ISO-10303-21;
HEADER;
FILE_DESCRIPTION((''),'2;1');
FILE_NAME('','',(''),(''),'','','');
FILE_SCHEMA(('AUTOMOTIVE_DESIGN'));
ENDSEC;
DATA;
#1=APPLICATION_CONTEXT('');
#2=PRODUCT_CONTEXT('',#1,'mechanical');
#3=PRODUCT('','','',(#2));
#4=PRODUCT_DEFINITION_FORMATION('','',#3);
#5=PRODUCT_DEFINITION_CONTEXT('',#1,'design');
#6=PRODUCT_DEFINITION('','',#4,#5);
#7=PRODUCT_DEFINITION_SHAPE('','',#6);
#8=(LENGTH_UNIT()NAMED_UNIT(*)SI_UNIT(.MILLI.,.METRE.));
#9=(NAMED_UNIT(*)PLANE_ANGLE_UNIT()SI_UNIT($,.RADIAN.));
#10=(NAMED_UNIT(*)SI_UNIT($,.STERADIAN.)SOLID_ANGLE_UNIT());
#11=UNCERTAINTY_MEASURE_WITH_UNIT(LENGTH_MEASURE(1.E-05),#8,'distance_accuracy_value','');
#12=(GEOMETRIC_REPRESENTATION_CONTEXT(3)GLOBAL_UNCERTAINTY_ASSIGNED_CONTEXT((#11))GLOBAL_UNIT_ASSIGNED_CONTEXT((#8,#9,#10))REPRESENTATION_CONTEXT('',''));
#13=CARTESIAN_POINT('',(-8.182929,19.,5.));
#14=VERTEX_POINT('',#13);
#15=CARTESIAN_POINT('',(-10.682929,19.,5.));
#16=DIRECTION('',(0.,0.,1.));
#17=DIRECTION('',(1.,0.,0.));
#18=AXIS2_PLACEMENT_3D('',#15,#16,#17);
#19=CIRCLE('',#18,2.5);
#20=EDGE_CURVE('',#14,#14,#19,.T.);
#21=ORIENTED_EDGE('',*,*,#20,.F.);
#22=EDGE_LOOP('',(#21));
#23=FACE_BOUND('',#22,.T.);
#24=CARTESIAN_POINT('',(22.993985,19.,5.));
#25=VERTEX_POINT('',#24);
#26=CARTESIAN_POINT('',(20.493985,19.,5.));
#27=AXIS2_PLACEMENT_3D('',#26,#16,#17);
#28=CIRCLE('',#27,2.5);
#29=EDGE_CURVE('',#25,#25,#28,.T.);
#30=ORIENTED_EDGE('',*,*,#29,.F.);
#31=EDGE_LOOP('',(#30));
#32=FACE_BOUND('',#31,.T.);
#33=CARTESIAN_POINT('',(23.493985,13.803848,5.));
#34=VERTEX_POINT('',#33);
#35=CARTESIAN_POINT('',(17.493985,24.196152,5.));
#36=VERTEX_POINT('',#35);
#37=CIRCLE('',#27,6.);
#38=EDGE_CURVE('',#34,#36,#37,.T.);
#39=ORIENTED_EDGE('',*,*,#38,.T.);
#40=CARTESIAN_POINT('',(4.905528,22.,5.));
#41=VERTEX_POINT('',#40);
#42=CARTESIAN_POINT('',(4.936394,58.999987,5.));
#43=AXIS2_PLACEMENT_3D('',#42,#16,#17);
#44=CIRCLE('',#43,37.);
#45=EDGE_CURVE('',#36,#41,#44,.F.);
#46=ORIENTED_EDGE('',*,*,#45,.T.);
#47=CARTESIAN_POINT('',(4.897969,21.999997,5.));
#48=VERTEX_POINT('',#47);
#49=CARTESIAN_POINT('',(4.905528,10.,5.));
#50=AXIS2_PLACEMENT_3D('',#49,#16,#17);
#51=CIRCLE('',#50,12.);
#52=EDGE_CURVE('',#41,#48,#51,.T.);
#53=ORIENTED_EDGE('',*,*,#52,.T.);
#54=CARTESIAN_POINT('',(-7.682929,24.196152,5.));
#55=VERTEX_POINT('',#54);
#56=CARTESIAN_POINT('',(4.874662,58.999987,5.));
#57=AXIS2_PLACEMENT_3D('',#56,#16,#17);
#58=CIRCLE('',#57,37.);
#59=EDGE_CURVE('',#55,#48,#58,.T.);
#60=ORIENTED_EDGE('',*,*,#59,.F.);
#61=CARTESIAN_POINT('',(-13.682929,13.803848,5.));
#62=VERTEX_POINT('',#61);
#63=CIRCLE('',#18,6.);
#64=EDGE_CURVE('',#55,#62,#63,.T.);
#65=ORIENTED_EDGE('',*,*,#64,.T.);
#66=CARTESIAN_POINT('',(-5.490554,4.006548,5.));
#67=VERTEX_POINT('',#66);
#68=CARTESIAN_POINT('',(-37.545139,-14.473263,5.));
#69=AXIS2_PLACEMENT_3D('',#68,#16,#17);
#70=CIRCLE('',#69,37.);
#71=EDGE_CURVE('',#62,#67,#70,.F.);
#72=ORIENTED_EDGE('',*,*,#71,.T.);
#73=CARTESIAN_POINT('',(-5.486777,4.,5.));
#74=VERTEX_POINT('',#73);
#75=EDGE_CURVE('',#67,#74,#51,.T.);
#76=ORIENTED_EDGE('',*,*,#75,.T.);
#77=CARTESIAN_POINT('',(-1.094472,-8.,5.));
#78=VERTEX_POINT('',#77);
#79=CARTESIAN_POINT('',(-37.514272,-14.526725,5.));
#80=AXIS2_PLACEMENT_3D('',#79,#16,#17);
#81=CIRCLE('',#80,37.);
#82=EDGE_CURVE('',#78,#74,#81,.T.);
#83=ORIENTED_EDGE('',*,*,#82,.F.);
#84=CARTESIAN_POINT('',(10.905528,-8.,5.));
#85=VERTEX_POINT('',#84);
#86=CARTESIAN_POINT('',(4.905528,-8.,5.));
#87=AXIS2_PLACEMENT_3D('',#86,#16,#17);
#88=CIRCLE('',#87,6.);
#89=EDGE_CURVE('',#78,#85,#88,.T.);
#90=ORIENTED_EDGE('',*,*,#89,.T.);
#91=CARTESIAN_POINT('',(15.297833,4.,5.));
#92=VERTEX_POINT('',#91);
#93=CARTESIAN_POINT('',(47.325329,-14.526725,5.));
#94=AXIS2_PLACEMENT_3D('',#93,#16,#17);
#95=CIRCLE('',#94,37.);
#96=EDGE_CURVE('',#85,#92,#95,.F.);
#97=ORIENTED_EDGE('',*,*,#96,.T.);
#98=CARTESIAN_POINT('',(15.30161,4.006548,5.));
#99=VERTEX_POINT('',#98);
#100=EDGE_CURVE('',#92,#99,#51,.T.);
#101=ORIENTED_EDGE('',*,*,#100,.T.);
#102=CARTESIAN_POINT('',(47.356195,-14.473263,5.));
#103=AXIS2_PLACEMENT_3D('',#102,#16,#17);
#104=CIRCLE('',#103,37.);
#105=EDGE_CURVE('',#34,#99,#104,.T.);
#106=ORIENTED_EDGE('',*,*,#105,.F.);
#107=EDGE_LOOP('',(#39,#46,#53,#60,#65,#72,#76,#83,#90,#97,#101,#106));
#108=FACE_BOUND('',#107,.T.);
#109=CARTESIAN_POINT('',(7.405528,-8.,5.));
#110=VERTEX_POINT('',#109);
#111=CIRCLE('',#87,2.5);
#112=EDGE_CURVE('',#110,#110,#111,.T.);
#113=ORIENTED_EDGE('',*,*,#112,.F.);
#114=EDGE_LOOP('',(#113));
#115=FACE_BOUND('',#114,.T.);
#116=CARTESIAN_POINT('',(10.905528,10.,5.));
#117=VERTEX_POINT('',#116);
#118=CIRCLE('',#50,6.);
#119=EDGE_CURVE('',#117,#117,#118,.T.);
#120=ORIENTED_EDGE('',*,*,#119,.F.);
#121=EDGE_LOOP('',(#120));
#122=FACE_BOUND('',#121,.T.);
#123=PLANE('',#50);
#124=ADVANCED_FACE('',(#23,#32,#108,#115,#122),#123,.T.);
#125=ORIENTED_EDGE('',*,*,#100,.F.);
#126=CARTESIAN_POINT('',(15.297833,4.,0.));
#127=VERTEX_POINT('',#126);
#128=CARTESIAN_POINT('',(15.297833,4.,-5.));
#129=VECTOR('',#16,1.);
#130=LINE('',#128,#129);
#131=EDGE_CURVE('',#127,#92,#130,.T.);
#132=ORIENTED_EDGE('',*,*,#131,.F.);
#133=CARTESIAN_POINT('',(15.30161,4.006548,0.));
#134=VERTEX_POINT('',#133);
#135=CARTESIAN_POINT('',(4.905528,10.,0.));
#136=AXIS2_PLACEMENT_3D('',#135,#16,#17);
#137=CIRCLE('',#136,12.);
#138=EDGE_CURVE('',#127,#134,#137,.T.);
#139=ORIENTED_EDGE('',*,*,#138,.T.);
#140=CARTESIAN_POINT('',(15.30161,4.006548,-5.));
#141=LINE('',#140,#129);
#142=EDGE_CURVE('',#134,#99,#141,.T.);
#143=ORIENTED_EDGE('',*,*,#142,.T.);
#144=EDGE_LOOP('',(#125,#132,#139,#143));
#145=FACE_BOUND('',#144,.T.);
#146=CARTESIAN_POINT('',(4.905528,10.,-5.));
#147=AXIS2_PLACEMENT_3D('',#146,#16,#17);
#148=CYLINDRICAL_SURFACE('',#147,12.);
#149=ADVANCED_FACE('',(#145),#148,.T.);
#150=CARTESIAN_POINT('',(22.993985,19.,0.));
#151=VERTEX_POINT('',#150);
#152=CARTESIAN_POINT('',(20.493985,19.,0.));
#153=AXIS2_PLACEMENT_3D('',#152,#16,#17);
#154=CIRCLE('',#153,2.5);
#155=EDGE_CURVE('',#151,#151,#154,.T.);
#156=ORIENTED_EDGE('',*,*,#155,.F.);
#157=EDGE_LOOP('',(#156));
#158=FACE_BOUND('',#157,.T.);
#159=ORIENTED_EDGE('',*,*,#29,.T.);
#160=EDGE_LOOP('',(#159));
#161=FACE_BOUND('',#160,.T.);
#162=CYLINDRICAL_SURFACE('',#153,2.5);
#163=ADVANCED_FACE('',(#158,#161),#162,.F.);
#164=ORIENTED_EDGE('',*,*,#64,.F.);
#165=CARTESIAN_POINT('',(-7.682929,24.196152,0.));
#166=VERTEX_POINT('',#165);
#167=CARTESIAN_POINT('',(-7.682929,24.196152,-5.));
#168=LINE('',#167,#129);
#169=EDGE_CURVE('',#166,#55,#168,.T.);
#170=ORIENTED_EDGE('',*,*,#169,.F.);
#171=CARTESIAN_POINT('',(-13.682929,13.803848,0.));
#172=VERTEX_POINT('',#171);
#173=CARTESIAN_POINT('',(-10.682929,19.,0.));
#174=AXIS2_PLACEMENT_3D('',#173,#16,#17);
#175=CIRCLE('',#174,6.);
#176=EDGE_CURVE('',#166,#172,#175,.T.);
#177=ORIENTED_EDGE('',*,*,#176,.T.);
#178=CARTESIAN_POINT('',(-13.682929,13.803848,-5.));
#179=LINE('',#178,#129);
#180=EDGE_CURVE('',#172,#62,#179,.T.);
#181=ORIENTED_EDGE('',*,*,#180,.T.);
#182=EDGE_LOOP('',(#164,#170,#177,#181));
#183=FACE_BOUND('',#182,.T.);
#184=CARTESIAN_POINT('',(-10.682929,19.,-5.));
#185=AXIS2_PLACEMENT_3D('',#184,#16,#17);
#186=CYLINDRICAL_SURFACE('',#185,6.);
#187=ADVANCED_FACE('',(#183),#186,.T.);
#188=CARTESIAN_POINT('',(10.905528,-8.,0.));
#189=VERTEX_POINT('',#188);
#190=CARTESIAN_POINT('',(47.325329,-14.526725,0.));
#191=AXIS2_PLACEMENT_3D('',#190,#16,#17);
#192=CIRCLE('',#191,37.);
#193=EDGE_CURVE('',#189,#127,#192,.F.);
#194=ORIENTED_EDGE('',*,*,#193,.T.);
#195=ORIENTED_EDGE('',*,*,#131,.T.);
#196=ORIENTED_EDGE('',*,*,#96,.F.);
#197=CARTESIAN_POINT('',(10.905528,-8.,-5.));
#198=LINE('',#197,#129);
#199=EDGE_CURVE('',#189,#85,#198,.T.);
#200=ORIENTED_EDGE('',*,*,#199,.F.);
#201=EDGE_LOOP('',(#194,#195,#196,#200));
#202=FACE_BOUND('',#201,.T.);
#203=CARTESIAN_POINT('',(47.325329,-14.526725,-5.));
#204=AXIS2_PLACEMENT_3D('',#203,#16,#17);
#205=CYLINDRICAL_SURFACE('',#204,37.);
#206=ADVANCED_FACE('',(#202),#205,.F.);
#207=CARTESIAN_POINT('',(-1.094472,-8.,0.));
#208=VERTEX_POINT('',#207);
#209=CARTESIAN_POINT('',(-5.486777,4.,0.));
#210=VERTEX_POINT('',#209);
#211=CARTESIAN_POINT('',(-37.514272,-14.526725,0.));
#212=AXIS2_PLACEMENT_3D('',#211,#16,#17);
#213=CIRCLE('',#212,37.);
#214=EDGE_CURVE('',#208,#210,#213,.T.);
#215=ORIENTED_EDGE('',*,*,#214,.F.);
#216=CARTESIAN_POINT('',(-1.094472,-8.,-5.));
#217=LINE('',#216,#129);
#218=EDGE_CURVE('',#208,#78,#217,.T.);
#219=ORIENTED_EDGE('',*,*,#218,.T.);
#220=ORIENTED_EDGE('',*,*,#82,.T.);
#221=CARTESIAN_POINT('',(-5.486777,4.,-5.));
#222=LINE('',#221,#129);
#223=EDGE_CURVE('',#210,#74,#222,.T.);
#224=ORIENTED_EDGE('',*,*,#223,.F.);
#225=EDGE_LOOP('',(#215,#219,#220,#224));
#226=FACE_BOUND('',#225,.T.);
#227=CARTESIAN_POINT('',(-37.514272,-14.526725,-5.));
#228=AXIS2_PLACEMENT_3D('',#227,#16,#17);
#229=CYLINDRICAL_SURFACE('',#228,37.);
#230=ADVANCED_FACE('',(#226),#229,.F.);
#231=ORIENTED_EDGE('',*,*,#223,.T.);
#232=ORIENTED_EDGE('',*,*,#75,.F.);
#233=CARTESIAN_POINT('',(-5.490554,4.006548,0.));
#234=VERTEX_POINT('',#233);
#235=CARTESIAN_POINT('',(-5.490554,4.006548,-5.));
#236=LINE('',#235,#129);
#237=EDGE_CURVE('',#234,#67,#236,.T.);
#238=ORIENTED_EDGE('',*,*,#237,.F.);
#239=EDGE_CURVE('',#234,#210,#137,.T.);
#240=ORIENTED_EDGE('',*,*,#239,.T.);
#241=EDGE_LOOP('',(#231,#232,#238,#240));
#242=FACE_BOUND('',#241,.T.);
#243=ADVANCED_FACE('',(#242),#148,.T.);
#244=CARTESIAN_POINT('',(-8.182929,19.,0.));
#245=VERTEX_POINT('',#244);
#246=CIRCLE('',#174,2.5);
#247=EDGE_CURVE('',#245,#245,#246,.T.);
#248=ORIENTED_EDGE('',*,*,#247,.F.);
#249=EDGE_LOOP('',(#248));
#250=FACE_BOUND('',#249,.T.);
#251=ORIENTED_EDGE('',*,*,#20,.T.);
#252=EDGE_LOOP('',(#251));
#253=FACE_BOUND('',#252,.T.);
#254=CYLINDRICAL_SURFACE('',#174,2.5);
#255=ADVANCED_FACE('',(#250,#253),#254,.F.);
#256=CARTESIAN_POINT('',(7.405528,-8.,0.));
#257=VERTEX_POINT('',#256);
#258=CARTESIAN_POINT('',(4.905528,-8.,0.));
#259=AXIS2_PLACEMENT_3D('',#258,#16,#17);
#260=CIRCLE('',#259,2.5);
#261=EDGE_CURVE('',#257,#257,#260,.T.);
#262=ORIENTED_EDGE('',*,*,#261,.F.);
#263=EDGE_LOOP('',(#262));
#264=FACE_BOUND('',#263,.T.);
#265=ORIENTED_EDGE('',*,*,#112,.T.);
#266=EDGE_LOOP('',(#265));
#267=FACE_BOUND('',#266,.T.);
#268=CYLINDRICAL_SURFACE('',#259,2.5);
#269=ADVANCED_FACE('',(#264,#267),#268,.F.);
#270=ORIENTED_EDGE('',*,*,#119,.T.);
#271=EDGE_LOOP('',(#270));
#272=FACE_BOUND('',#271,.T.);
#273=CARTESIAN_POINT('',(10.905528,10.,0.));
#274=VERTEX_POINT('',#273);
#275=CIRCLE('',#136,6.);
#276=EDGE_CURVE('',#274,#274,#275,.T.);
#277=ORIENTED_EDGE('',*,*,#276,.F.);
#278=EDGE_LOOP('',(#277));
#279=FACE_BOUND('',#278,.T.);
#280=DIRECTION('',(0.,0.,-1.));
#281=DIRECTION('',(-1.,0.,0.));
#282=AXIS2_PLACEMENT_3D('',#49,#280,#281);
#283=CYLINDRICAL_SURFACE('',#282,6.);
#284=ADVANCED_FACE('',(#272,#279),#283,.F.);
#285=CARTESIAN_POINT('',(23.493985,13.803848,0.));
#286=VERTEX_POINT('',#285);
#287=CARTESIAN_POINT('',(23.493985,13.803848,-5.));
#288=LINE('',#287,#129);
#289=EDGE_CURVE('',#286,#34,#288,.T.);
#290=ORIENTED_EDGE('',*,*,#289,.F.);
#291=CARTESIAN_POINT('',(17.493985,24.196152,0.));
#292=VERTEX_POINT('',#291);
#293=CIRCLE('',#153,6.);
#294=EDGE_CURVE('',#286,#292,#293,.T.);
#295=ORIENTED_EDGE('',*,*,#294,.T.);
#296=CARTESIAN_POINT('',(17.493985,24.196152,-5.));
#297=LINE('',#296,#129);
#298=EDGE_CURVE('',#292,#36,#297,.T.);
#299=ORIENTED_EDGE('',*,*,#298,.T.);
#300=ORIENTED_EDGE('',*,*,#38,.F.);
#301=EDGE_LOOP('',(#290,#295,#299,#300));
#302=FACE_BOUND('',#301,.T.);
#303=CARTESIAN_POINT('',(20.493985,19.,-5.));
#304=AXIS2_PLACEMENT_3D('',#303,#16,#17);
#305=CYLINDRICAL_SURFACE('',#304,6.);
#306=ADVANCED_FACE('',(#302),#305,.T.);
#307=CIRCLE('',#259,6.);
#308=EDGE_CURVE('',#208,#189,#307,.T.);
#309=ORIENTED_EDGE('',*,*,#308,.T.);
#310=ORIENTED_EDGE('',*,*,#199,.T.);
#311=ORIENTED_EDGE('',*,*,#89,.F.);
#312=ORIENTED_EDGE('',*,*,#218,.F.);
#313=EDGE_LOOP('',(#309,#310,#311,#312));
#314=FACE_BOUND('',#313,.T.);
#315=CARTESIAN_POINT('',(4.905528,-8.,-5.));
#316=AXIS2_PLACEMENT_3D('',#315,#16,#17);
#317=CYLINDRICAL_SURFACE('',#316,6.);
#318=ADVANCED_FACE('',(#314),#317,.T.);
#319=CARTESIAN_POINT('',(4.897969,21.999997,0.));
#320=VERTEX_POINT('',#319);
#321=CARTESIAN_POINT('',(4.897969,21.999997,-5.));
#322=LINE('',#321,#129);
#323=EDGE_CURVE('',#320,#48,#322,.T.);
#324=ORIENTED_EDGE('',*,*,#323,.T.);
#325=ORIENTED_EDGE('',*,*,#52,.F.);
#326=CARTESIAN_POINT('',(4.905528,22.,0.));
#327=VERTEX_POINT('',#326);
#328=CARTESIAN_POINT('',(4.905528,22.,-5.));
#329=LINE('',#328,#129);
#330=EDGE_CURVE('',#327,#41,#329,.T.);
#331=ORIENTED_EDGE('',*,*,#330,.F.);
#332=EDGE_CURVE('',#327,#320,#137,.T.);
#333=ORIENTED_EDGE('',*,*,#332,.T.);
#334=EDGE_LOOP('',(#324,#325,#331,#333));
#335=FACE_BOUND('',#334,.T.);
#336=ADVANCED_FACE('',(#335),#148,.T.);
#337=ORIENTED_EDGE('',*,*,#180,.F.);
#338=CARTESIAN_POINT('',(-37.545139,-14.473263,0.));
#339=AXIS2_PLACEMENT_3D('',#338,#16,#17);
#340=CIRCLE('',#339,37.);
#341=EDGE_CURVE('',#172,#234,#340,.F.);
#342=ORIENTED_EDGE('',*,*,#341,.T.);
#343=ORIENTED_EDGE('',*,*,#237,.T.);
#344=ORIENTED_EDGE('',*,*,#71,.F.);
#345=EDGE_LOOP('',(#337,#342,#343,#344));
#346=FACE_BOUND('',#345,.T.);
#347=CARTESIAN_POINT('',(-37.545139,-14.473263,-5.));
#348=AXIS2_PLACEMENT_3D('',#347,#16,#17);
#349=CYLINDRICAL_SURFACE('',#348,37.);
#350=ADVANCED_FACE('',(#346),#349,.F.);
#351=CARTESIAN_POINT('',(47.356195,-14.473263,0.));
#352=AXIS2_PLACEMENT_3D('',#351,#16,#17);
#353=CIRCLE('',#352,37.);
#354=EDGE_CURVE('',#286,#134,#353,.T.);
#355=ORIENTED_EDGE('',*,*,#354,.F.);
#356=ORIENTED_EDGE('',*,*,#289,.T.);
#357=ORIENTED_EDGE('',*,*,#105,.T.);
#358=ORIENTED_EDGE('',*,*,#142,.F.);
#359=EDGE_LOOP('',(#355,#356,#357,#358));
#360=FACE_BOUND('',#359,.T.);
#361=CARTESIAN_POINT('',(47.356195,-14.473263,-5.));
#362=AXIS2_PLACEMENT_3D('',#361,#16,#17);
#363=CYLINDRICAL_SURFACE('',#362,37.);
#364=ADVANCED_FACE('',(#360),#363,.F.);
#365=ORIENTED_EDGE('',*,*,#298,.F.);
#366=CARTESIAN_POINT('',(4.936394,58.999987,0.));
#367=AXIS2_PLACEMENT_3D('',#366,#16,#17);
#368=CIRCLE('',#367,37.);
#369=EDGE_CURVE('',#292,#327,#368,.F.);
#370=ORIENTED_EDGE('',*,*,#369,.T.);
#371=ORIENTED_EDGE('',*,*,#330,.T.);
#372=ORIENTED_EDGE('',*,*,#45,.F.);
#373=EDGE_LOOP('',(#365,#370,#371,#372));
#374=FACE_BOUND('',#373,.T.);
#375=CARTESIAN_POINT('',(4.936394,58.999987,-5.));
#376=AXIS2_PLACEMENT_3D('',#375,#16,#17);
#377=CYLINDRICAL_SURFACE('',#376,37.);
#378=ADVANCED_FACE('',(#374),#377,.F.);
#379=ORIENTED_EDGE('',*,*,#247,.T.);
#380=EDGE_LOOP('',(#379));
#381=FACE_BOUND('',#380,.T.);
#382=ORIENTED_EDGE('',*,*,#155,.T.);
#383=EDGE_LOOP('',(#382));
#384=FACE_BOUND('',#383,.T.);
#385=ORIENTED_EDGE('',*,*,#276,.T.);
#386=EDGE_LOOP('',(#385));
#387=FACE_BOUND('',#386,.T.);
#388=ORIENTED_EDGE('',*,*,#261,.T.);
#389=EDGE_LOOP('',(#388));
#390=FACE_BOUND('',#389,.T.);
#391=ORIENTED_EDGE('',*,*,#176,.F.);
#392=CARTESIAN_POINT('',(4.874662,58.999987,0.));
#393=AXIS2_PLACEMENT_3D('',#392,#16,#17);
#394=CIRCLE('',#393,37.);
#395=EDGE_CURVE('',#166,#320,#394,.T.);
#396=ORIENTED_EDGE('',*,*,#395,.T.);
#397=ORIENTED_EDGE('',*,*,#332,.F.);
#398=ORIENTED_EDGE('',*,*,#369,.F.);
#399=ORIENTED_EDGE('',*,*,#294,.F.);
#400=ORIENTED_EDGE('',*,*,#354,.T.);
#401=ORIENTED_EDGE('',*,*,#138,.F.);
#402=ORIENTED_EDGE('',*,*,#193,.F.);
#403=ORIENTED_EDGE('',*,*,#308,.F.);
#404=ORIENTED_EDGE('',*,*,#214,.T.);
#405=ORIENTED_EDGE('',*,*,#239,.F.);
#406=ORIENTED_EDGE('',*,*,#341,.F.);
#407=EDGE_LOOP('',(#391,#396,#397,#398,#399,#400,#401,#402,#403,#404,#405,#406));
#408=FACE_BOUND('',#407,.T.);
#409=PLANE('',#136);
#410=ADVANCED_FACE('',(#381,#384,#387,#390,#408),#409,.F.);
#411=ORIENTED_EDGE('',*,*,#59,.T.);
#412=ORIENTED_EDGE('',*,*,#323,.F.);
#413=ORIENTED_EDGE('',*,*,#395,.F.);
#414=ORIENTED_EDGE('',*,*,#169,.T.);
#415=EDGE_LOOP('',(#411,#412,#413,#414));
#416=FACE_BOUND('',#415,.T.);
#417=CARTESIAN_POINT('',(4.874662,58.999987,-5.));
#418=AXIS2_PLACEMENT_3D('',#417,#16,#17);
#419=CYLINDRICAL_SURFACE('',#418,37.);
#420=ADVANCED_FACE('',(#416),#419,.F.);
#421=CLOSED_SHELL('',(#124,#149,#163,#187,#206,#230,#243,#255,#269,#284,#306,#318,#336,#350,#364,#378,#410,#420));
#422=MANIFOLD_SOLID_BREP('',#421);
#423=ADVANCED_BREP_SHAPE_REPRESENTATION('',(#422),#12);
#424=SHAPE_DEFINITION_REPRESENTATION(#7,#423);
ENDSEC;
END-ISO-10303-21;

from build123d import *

# Parameters (mm, degrees)
ESBO_O1_R                 = 24
ESBO_O1_R_2               = 6
RESSALTO_EXTRUS_O1_DEPTH  = 5
ESBO_O2_R                 = 2.5
CORTE_EXTRUS_O1_DEPTH     = 45.905785333
CORTE_EXTRUS_O2_START     = -5
CORTE_EXTRUS_O2_OUTLINE_R = 2.5
CORTE_EXTRUS_O2_DEPTH     = 5


# Read off the part's stored shape, not the designer's step: Corte-extrusão2
with BuildPart() as part:
    # Esboço1 → Ressalto-extrusão1 (new body)
    with BuildSketch(Plane.XY):
        with Locations((4.905528128, 10)):
            Circle(ESBO_O1_R)
        with Locations((4.905528128, 10)):
            Circle(ESBO_O1_R_2, mode=Mode.SUBTRACT)
    extrude(amount=RESSALTO_EXTRUS_O1_DEPTH)

    # Esboço2 → Corte-extrusão1 (cut, through all)
    with BuildSketch(Plane.XY.offset(5)):
        with Locations((4.905528128, 28)):
            Circle(ESBO_O2_R)
        with Locations((20.493985396, 19)):
            Circle(ESBO_O2_R)
        with Locations((20.493985396, 1)):
            Circle(ESBO_O2_R)
        with Locations((4.905528128, -8)):
            Circle(ESBO_O2_R)
        with Locations((-10.68292914, 1)):
            Circle(ESBO_O2_R)
        with Locations((-10.68292914, 19)):
            Circle(ESBO_O2_R)
    extrude(amount=-CORTE_EXTRUS_O1_DEPTH, mode=Mode.SUBTRACT)

    # Corte-extrusão2 outline → Corte-extrusão2 (cut)
    # profile 1 of 3: a face of its own
    with BuildSketch(Plane.XY.offset(5).offset(CORTE_EXTRUS_O2_START)):
        with BuildLine():
            ThreePointArc((4.897969025, 21.999997619), (4.901748576, 21.999999405), (4.905528128, 22))
            ThreePointArc((4.905528128, 22), (11.295284197, 22.550508098), (17.493985396, 24.196152423))
            ThreePointArc((17.493985396, 24.196152423), (22.046899667, 24.795554958), (25.690137819, 22))
            ThreePointArc((25.690137819, 22), (4.905528128, 34), (-15.879081563, 22))
            ThreePointArc((-15.879081563, 22), (-12.235843411, 24.795554958), (-7.68292914, 24.196152423))
            ThreePointArc((-7.68292914, 24.196152423), (-1.487951224, 22.551157849), (4.897969025, 21.999997619))
        make_face()
        with Locations((4.905528128, 28)):
            Circle(CORTE_EXTRUS_O2_OUTLINE_R, mode=Mode.SUBTRACT)
    # profile 2 of 3: a face of its own
    with BuildSketch(Plane.XY.offset(5).offset(CORTE_EXTRUS_O2_START)):
        with BuildLine():
            ThreePointArc((4.905528128, -14), (25.690137819, -2), (25.690137819, 22))
            ThreePointArc((25.690137819, 22), (26.289540354, 17.447085729), (23.493985396, 13.803847577))
            ThreePointArc((23.493985396, 13.803847577), (18.971889348, 9.261336613), (15.301607732, 4.006549141))
            ThreePointArc((15.301607732, 4.006549141), (15.299722234, 4.003273486), (15.297832974, 4))
            ThreePointArc((15.297832974, 4), (12.579708936, -1.808945129), (10.905528128, -8))
            ThreePointArc((10.905528128, -8), (9.148168815, -12.242640687), (4.905528128, -14))
        make_face()
        with Locations((20.493985396, 1)):
            Circle(CORTE_EXTRUS_O2_OUTLINE_R, mode=Mode.SUBTRACT)
    # profile 3 of 3: a face of its own
    with BuildSketch(Plane.XY.offset(5).offset(CORTE_EXTRUS_O2_START)):
        with BuildLine():
            ThreePointArc((-13.68292914, 13.803847577), (-16.478484098, 17.447085729), (-15.879081563, 22))
            ThreePointArc((-15.879081563, 22), (-15.879081563, -2), (4.905528128, -14))
            ThreePointArc((4.905528128, -14), (0.662887441, -12.242640687), (-1.094471872, -8))
            ThreePointArc((-1.094471872, -8), (-2.76865268, -1.808945129), (-5.486776717, 4))
            ThreePointArc((-5.486776717, 4), (-5.488665978, 4.003273485), (-5.490554207, 4.006547566))
            ThreePointArc((-5.490554207, 4.006547566), (-9.160833092, 9.261336613), (-13.68292914, 13.803847577))
        make_face()
        with Locations((-10.68292914, 1)):
            Circle(CORTE_EXTRUS_O2_OUTLINE_R, mode=Mode.SUBTRACT)
    extrude(amount=CORTE_EXTRUS_O2_DEPTH, mode=Mode.SUBTRACT)


solid = part.part
